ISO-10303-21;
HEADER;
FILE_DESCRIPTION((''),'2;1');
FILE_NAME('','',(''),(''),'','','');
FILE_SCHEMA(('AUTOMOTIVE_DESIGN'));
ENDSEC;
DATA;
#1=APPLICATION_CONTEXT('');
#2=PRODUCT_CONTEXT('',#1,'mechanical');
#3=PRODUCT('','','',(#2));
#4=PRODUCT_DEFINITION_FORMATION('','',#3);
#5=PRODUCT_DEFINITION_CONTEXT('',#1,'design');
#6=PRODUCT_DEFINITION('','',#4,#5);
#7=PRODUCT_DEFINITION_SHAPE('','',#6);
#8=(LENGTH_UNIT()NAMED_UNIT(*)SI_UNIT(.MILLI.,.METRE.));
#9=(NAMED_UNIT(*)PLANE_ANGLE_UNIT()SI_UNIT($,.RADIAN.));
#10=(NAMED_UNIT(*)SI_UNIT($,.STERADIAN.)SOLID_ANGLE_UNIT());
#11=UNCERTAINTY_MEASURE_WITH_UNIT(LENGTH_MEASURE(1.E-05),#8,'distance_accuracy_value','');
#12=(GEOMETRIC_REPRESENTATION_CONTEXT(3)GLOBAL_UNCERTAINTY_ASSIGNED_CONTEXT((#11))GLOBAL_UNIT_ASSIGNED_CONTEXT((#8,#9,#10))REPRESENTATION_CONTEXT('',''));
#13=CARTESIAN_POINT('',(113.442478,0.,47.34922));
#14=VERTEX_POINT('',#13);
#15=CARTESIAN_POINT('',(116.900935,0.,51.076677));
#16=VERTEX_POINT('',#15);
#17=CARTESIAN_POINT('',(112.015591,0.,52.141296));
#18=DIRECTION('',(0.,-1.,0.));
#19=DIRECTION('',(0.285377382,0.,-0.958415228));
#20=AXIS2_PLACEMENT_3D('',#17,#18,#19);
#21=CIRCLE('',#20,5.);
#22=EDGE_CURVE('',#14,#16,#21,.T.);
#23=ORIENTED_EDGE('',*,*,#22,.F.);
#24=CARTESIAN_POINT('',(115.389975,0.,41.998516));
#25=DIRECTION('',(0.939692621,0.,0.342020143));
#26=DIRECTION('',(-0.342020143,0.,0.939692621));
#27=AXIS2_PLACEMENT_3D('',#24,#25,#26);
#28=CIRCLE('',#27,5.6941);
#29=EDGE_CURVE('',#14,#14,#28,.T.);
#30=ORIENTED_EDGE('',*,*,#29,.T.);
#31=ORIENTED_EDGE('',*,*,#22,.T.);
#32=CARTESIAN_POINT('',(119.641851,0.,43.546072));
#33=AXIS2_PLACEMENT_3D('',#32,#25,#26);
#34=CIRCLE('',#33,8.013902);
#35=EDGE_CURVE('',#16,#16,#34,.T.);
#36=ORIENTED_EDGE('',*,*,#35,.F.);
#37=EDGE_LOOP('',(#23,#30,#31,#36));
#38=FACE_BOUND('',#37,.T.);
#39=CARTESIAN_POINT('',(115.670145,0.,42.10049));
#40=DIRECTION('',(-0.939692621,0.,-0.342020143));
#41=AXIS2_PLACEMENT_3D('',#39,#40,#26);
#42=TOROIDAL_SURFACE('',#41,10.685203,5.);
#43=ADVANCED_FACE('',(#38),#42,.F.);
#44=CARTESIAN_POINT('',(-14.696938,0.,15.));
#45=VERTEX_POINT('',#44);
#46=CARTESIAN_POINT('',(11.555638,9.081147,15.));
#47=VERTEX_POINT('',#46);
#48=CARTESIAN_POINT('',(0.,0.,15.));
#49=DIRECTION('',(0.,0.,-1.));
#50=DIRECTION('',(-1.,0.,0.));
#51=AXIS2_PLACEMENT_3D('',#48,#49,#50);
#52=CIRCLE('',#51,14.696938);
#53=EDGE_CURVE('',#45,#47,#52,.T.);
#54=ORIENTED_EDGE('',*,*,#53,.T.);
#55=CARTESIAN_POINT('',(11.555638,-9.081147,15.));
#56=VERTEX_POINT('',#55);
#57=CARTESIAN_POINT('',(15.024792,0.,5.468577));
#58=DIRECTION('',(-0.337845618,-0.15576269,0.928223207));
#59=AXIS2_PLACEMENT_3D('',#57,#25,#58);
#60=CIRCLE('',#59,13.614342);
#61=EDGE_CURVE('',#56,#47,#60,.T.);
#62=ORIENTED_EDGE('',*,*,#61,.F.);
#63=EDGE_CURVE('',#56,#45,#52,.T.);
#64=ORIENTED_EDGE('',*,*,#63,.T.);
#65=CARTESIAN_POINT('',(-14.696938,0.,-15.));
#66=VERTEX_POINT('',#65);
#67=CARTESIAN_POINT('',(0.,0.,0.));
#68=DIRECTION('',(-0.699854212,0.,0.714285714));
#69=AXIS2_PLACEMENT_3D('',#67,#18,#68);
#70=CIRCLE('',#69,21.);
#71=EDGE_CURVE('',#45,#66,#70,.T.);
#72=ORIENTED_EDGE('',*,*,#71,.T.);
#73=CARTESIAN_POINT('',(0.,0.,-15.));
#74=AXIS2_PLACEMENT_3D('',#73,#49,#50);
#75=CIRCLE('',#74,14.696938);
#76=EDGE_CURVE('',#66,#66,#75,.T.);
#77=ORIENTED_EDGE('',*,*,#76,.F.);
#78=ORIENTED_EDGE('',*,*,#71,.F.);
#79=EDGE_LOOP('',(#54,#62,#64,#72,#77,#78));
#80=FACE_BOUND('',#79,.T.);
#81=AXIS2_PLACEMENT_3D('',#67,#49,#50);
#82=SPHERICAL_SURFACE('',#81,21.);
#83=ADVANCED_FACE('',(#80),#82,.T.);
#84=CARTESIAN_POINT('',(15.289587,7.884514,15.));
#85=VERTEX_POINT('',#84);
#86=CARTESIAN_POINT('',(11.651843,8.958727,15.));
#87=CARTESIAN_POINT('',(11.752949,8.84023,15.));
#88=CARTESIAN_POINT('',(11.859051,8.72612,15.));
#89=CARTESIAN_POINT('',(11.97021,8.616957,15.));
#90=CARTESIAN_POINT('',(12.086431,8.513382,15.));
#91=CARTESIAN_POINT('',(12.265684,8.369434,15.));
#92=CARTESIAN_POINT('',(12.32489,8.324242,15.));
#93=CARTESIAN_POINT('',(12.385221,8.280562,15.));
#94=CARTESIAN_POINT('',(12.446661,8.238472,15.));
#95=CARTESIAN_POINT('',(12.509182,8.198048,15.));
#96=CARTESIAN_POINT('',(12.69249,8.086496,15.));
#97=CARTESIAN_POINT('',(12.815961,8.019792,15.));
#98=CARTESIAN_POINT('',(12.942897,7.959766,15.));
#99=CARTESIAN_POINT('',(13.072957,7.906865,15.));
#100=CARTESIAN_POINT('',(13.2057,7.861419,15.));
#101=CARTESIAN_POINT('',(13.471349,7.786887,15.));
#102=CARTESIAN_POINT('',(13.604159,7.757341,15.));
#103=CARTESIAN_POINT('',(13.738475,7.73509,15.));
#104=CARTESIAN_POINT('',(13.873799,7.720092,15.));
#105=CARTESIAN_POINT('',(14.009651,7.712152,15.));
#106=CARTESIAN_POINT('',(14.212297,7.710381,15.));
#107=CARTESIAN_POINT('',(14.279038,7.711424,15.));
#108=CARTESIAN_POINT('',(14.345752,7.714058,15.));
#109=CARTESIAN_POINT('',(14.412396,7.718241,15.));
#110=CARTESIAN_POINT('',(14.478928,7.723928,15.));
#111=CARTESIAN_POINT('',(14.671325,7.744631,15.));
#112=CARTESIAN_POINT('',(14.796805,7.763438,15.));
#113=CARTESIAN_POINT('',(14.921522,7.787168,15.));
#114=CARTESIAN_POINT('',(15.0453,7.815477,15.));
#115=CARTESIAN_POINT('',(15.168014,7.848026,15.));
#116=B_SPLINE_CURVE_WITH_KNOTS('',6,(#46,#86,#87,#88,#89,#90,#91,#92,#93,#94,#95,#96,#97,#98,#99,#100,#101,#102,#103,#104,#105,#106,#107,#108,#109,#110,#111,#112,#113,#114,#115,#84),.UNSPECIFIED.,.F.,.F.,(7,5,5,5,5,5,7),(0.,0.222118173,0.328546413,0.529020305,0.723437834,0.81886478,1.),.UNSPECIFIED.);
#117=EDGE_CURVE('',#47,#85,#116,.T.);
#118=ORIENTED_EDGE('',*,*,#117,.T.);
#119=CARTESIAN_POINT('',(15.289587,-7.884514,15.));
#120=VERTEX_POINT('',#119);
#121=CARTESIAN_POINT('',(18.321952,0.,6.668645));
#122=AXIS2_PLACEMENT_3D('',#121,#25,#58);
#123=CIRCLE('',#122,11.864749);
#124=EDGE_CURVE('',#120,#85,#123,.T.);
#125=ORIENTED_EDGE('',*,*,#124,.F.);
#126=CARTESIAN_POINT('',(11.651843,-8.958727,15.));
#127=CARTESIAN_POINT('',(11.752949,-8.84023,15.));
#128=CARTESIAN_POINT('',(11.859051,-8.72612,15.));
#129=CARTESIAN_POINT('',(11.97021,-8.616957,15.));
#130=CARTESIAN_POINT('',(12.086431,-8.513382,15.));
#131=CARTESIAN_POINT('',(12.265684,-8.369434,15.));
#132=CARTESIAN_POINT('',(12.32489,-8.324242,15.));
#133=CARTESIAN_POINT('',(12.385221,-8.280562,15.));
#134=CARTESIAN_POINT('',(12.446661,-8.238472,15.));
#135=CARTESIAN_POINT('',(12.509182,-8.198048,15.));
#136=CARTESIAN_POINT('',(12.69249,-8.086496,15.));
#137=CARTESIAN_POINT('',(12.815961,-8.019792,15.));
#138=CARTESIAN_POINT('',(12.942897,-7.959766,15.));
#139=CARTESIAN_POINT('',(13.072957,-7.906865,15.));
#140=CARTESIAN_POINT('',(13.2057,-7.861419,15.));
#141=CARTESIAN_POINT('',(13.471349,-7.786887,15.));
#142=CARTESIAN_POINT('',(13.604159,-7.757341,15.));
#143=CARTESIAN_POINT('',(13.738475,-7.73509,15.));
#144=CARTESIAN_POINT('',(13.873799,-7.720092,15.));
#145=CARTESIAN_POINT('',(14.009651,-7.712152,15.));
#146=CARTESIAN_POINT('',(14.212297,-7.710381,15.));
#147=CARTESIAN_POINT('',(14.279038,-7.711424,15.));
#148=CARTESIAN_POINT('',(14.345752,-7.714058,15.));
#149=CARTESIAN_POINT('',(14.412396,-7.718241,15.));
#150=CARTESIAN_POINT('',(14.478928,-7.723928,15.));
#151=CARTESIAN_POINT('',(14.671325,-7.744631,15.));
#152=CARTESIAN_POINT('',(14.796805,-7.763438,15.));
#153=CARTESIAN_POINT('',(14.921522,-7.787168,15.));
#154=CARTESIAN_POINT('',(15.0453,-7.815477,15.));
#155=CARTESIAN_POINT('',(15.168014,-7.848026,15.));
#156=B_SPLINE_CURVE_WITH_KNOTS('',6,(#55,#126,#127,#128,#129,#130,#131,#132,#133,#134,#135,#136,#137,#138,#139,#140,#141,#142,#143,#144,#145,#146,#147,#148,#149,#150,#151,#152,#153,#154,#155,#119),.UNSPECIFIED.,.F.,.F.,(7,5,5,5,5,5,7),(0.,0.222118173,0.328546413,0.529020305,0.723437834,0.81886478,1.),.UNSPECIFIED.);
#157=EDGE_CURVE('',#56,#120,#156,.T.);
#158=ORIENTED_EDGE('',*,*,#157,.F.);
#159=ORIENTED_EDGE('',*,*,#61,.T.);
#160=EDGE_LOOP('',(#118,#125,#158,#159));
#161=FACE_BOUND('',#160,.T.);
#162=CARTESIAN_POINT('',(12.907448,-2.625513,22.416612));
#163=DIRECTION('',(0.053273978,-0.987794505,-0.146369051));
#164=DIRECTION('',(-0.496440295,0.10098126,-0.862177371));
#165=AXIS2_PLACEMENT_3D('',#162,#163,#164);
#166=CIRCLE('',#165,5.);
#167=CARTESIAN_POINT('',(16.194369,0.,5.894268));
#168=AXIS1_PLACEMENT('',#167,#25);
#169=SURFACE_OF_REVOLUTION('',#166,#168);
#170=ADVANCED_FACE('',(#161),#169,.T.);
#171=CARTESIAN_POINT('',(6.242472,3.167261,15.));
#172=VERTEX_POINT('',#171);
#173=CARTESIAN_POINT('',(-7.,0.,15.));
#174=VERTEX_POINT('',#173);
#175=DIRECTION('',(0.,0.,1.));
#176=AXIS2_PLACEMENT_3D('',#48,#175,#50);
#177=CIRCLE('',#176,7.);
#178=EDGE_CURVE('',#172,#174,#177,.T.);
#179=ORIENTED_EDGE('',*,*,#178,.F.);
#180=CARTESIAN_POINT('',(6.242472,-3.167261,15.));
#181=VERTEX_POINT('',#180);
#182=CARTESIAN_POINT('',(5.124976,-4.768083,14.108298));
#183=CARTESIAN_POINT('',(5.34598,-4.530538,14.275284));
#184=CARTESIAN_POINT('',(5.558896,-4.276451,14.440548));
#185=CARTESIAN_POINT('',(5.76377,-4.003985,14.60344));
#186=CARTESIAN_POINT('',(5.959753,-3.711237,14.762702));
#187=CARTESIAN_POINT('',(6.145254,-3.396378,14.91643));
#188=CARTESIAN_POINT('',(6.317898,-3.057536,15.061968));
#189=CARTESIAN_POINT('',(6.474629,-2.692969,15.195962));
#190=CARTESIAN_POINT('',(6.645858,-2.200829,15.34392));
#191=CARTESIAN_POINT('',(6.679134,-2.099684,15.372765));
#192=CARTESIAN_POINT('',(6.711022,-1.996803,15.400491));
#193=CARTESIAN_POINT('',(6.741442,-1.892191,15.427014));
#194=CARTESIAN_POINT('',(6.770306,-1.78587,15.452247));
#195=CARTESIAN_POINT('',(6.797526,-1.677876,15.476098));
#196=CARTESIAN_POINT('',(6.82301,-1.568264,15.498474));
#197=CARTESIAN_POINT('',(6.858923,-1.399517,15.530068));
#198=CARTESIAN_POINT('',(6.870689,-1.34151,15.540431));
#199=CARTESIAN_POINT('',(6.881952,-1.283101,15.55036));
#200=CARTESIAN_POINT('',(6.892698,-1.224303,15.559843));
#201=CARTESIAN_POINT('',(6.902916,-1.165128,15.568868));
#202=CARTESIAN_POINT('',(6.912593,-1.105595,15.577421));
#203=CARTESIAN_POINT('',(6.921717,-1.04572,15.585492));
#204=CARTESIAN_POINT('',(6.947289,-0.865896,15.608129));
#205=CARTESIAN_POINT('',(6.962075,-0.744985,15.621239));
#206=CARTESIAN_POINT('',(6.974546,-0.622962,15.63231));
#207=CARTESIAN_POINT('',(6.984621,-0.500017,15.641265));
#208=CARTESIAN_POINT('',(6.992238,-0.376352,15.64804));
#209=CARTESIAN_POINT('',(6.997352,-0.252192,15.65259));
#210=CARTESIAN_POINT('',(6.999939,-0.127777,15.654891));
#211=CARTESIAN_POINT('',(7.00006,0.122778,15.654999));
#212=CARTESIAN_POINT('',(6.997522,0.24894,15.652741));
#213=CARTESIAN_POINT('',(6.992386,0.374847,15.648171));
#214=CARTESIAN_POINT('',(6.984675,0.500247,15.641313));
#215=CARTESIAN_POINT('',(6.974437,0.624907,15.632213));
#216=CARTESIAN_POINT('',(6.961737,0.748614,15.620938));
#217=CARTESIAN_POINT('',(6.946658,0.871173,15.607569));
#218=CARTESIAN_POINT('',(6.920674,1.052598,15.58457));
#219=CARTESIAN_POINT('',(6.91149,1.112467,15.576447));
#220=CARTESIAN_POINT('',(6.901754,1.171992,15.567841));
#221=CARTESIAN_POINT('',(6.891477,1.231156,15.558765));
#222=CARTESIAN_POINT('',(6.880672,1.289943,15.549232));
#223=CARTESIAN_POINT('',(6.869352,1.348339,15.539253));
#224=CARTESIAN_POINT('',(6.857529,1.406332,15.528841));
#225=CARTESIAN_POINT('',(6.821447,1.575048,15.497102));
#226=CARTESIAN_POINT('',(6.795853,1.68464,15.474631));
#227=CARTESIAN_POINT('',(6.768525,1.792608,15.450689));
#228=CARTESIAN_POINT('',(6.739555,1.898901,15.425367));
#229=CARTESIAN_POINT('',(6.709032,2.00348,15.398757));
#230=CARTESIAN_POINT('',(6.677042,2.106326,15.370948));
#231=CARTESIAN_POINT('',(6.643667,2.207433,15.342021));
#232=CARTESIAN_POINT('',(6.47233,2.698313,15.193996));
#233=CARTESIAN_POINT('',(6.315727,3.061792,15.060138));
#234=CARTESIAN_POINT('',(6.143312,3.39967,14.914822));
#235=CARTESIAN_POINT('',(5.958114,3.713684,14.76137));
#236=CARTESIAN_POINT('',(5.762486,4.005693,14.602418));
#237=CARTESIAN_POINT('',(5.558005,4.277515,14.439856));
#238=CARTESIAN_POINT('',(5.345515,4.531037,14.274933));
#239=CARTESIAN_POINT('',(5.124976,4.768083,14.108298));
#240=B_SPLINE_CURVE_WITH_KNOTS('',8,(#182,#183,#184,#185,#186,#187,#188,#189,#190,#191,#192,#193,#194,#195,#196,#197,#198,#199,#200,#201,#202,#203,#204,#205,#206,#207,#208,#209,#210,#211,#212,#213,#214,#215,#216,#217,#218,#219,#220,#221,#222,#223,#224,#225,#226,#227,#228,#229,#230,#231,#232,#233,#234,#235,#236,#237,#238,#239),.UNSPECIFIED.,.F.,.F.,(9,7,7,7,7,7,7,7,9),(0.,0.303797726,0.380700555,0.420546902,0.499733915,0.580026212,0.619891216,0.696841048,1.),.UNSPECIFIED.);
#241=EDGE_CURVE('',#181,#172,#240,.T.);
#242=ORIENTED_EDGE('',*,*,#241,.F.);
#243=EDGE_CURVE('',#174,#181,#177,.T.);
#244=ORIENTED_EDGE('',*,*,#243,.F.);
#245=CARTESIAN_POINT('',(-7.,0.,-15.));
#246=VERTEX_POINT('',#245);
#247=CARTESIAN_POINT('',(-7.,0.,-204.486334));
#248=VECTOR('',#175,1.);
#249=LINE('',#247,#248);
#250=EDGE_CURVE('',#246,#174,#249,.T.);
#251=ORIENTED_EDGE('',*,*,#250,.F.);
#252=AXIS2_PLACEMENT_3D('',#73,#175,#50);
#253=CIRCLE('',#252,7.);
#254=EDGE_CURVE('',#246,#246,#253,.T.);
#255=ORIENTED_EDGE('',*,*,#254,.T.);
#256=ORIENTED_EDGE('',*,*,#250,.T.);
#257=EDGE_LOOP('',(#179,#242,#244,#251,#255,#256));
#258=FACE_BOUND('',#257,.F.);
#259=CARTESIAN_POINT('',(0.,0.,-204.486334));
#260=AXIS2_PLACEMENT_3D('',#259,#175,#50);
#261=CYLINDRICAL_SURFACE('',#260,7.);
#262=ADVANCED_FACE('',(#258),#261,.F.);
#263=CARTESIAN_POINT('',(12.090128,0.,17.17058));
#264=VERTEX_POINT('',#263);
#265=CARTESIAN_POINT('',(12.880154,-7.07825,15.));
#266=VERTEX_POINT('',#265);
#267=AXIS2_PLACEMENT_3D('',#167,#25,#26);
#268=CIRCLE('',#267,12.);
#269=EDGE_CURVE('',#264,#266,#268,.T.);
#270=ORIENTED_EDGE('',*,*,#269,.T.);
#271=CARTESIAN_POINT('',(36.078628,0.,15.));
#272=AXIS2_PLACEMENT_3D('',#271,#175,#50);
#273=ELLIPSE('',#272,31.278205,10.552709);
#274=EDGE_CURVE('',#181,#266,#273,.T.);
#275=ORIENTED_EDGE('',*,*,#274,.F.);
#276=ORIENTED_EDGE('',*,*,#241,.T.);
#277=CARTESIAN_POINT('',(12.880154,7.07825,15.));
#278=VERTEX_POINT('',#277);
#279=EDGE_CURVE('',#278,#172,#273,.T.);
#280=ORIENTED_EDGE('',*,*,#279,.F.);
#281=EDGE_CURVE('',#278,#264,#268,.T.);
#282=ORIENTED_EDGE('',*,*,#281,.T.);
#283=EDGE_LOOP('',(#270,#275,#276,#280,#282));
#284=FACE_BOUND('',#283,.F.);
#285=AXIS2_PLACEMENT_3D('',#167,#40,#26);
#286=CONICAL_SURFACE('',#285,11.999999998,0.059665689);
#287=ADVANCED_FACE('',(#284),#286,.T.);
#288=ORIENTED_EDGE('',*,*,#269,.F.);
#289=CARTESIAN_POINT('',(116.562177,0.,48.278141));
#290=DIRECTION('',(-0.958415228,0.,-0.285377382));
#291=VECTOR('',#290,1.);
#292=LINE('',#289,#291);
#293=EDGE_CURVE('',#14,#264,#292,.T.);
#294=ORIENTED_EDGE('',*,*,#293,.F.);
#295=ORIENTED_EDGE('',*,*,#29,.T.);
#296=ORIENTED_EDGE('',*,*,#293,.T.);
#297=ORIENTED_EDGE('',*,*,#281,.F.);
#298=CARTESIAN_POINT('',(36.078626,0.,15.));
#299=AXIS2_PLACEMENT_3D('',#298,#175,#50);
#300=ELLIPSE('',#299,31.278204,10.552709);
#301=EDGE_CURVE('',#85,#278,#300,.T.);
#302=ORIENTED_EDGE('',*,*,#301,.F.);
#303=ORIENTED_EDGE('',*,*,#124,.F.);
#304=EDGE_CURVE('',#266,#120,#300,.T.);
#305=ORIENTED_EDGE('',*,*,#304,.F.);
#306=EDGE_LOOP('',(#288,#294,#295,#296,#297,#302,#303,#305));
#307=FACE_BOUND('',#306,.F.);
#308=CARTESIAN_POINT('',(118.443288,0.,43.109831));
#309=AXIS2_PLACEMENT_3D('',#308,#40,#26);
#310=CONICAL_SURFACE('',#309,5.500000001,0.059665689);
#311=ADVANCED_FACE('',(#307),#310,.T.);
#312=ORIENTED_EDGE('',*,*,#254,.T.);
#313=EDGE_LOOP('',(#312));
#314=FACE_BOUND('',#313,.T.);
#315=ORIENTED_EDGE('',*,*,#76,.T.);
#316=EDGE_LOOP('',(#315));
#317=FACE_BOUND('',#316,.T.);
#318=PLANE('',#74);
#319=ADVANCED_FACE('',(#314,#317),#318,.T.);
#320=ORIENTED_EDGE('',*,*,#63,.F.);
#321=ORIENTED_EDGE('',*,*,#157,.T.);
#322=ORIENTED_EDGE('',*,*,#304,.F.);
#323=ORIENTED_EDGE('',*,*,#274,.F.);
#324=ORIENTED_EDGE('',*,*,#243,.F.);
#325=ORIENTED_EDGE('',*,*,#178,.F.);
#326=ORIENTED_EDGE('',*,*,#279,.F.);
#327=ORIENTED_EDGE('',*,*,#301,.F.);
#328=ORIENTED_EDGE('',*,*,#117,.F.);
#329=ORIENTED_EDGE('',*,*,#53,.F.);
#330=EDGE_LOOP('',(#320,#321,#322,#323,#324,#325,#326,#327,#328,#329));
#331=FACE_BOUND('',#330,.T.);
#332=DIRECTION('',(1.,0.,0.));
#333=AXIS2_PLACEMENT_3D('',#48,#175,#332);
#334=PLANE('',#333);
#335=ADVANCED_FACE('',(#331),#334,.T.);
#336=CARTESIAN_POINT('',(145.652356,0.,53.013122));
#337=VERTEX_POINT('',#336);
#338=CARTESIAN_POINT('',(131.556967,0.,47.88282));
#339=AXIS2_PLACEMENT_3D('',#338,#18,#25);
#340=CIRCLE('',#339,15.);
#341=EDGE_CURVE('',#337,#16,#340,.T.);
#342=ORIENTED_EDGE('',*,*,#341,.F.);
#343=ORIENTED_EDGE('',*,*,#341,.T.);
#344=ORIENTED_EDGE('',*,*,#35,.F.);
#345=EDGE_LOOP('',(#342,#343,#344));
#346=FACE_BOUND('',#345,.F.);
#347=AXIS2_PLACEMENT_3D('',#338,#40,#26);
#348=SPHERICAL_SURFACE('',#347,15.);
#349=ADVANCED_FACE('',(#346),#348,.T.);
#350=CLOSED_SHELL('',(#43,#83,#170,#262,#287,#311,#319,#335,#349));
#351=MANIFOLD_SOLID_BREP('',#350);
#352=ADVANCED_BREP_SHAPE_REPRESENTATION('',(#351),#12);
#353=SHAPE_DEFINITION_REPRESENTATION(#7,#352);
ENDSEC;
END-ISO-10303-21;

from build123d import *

# Parameters (mm, degrees)
F3_T4_ANGLE = 342.0779351193
F5_D        = 14


# Not quite as in the source:
# - a fillet or chamfer that OpenCascade refuses, or shapes differently, is made with other operations: its cross-section is extruded or revolved along the edge and cut away or added


with BuildPart() as f1:
    # F0 (on Front) → F1 (revolve)
    with BuildSketch(Plane.XZ):
        with BuildLine():
            Line((0, 15), (-14.6969384567, 15))
            ThreePointArc((-14.6969384567, 15), (-21, 0), (-14.6969384567, -15))
            Line((-14.6969384567, -15), (0, -15))
            Line((0, -15), (0, -14.1738577821))
            Line((0, -14.1738577821), (0, 0))
            Line((0, 0), (0, 13.5706276966))
            Line((0, 13.5706276966), (0, 15))
        make_face()
    revolve(axis=Axis((0, 0, 0), (0, 0, -1)))

    # F0 (on Front) → F2 (revolve)
    with BuildSketch(Plane.XZ):
        with BuildLine():
            Line((116.5621770938, 48.278140652), (12.0901276659, 17.1705798686))
            Line((12.0901276659, 17.1705798686), (4.800423118, 15))
            Line((4.800423118, 15), (0, 13.5706276966))
            Line((0, 13.5706276966), (0, 0))
            Line((0, 0), (19.7335450365, 7.1824230098))
            Line((19.7335450365, 7.1824230098), (117.4615775982, 42.7525179157))
            ThreePointArc((117.4615775982, 42.7525179157), (116.7518070973, 45.4729978899), (116.5621770938, 48.278140652))
        make_face()
        with BuildLine():
            ThreePointArc((145.6523562218, 53.0131222155), (129.1471447343, 62.6879798784), (116.5621770938, 48.278140652))
            ThreePointArc((116.5621770938, 48.278140652), (116.7518070973, 45.4729978899), (117.4615775982, 42.7525179157))
            Line((117.4615775982, 42.7525179157), (145.6523562218, 53.0131222155))
        make_face()
    revolve(axis=Axis((72.8261781109, 0, 26.5065611077), (0.9396926208, 0, 0.3420201433)))

    # F3: fillet of radius 5 on 2 edges, made by hand


with BuildPart() as f3_tool2:
    # F3_s3 → F3_t4 (revolve)
    with BuildSketch(Plane(origin=(1e-10, -2.3e-09, -3e-10), x_dir=(-0.9985488213, -0.053853982, 0), z_dir=(-0.0532739776, 0.9877945051, 0.1463690505))):
        with BuildLine():
            ThreePointArc((-10.2959142188, 18.3028453824), (-12.2007985149, 17.6906243055), (-14.1932009283, 17.8742855481))
            Line((-14.1932009283, 17.8742855481), (-12.0219430441, 17.2183880011))
            ThreePointArc((-12.0219430441, 17.2183880011), (-11.1720947014, 17.7815718865), (-10.2959142188, 18.3028453824))
        make_face()
    revolve(axis=Axis((16.194369394, 1.4e-09, 5.8942683966), (0.9396926208, 0, 0.3420201433)), revolution_arc=F3_T4_ANGLE)

    split(bisect_by=Plane.XY.offset(15), keep=Keep.BOTTOM)


with BuildPart() as f1_1:
    add(f1.part)

    # F3_t1: union F3_tool2
    add(f3_tool2.part)

    # F3_s6 → F3_t7 (revolve)
    with BuildSketch(Plane.XZ):
        with BuildLine():
            ThreePointArc((113.4424776902, 47.3492200522), (115.6809078185, 48.7404946697), (116.9009348123, 51.0766771615))
            ThreePointArc((116.9009348123, 51.0766771615), (116.6656687231, 49.6853844353), (116.5621770938, 48.278140652))
            Line((116.5621770938, 48.278140652), (113.4424776902, 47.3492200522))
        make_face()
    revolve(axis=Axis((118.4432878821, 0, 43.1098312377), (0.9396926208, 0, 0.3420201433)))

    # F5 (through all)
    with Locations(Plane(origin=(0, 0, -15), x_dir=(1, 0, 0), z_dir=(0, 0, -1))):
        with Locations((0, 0)):
            Hole(F5_D / 2)


solid = f1_1.part
